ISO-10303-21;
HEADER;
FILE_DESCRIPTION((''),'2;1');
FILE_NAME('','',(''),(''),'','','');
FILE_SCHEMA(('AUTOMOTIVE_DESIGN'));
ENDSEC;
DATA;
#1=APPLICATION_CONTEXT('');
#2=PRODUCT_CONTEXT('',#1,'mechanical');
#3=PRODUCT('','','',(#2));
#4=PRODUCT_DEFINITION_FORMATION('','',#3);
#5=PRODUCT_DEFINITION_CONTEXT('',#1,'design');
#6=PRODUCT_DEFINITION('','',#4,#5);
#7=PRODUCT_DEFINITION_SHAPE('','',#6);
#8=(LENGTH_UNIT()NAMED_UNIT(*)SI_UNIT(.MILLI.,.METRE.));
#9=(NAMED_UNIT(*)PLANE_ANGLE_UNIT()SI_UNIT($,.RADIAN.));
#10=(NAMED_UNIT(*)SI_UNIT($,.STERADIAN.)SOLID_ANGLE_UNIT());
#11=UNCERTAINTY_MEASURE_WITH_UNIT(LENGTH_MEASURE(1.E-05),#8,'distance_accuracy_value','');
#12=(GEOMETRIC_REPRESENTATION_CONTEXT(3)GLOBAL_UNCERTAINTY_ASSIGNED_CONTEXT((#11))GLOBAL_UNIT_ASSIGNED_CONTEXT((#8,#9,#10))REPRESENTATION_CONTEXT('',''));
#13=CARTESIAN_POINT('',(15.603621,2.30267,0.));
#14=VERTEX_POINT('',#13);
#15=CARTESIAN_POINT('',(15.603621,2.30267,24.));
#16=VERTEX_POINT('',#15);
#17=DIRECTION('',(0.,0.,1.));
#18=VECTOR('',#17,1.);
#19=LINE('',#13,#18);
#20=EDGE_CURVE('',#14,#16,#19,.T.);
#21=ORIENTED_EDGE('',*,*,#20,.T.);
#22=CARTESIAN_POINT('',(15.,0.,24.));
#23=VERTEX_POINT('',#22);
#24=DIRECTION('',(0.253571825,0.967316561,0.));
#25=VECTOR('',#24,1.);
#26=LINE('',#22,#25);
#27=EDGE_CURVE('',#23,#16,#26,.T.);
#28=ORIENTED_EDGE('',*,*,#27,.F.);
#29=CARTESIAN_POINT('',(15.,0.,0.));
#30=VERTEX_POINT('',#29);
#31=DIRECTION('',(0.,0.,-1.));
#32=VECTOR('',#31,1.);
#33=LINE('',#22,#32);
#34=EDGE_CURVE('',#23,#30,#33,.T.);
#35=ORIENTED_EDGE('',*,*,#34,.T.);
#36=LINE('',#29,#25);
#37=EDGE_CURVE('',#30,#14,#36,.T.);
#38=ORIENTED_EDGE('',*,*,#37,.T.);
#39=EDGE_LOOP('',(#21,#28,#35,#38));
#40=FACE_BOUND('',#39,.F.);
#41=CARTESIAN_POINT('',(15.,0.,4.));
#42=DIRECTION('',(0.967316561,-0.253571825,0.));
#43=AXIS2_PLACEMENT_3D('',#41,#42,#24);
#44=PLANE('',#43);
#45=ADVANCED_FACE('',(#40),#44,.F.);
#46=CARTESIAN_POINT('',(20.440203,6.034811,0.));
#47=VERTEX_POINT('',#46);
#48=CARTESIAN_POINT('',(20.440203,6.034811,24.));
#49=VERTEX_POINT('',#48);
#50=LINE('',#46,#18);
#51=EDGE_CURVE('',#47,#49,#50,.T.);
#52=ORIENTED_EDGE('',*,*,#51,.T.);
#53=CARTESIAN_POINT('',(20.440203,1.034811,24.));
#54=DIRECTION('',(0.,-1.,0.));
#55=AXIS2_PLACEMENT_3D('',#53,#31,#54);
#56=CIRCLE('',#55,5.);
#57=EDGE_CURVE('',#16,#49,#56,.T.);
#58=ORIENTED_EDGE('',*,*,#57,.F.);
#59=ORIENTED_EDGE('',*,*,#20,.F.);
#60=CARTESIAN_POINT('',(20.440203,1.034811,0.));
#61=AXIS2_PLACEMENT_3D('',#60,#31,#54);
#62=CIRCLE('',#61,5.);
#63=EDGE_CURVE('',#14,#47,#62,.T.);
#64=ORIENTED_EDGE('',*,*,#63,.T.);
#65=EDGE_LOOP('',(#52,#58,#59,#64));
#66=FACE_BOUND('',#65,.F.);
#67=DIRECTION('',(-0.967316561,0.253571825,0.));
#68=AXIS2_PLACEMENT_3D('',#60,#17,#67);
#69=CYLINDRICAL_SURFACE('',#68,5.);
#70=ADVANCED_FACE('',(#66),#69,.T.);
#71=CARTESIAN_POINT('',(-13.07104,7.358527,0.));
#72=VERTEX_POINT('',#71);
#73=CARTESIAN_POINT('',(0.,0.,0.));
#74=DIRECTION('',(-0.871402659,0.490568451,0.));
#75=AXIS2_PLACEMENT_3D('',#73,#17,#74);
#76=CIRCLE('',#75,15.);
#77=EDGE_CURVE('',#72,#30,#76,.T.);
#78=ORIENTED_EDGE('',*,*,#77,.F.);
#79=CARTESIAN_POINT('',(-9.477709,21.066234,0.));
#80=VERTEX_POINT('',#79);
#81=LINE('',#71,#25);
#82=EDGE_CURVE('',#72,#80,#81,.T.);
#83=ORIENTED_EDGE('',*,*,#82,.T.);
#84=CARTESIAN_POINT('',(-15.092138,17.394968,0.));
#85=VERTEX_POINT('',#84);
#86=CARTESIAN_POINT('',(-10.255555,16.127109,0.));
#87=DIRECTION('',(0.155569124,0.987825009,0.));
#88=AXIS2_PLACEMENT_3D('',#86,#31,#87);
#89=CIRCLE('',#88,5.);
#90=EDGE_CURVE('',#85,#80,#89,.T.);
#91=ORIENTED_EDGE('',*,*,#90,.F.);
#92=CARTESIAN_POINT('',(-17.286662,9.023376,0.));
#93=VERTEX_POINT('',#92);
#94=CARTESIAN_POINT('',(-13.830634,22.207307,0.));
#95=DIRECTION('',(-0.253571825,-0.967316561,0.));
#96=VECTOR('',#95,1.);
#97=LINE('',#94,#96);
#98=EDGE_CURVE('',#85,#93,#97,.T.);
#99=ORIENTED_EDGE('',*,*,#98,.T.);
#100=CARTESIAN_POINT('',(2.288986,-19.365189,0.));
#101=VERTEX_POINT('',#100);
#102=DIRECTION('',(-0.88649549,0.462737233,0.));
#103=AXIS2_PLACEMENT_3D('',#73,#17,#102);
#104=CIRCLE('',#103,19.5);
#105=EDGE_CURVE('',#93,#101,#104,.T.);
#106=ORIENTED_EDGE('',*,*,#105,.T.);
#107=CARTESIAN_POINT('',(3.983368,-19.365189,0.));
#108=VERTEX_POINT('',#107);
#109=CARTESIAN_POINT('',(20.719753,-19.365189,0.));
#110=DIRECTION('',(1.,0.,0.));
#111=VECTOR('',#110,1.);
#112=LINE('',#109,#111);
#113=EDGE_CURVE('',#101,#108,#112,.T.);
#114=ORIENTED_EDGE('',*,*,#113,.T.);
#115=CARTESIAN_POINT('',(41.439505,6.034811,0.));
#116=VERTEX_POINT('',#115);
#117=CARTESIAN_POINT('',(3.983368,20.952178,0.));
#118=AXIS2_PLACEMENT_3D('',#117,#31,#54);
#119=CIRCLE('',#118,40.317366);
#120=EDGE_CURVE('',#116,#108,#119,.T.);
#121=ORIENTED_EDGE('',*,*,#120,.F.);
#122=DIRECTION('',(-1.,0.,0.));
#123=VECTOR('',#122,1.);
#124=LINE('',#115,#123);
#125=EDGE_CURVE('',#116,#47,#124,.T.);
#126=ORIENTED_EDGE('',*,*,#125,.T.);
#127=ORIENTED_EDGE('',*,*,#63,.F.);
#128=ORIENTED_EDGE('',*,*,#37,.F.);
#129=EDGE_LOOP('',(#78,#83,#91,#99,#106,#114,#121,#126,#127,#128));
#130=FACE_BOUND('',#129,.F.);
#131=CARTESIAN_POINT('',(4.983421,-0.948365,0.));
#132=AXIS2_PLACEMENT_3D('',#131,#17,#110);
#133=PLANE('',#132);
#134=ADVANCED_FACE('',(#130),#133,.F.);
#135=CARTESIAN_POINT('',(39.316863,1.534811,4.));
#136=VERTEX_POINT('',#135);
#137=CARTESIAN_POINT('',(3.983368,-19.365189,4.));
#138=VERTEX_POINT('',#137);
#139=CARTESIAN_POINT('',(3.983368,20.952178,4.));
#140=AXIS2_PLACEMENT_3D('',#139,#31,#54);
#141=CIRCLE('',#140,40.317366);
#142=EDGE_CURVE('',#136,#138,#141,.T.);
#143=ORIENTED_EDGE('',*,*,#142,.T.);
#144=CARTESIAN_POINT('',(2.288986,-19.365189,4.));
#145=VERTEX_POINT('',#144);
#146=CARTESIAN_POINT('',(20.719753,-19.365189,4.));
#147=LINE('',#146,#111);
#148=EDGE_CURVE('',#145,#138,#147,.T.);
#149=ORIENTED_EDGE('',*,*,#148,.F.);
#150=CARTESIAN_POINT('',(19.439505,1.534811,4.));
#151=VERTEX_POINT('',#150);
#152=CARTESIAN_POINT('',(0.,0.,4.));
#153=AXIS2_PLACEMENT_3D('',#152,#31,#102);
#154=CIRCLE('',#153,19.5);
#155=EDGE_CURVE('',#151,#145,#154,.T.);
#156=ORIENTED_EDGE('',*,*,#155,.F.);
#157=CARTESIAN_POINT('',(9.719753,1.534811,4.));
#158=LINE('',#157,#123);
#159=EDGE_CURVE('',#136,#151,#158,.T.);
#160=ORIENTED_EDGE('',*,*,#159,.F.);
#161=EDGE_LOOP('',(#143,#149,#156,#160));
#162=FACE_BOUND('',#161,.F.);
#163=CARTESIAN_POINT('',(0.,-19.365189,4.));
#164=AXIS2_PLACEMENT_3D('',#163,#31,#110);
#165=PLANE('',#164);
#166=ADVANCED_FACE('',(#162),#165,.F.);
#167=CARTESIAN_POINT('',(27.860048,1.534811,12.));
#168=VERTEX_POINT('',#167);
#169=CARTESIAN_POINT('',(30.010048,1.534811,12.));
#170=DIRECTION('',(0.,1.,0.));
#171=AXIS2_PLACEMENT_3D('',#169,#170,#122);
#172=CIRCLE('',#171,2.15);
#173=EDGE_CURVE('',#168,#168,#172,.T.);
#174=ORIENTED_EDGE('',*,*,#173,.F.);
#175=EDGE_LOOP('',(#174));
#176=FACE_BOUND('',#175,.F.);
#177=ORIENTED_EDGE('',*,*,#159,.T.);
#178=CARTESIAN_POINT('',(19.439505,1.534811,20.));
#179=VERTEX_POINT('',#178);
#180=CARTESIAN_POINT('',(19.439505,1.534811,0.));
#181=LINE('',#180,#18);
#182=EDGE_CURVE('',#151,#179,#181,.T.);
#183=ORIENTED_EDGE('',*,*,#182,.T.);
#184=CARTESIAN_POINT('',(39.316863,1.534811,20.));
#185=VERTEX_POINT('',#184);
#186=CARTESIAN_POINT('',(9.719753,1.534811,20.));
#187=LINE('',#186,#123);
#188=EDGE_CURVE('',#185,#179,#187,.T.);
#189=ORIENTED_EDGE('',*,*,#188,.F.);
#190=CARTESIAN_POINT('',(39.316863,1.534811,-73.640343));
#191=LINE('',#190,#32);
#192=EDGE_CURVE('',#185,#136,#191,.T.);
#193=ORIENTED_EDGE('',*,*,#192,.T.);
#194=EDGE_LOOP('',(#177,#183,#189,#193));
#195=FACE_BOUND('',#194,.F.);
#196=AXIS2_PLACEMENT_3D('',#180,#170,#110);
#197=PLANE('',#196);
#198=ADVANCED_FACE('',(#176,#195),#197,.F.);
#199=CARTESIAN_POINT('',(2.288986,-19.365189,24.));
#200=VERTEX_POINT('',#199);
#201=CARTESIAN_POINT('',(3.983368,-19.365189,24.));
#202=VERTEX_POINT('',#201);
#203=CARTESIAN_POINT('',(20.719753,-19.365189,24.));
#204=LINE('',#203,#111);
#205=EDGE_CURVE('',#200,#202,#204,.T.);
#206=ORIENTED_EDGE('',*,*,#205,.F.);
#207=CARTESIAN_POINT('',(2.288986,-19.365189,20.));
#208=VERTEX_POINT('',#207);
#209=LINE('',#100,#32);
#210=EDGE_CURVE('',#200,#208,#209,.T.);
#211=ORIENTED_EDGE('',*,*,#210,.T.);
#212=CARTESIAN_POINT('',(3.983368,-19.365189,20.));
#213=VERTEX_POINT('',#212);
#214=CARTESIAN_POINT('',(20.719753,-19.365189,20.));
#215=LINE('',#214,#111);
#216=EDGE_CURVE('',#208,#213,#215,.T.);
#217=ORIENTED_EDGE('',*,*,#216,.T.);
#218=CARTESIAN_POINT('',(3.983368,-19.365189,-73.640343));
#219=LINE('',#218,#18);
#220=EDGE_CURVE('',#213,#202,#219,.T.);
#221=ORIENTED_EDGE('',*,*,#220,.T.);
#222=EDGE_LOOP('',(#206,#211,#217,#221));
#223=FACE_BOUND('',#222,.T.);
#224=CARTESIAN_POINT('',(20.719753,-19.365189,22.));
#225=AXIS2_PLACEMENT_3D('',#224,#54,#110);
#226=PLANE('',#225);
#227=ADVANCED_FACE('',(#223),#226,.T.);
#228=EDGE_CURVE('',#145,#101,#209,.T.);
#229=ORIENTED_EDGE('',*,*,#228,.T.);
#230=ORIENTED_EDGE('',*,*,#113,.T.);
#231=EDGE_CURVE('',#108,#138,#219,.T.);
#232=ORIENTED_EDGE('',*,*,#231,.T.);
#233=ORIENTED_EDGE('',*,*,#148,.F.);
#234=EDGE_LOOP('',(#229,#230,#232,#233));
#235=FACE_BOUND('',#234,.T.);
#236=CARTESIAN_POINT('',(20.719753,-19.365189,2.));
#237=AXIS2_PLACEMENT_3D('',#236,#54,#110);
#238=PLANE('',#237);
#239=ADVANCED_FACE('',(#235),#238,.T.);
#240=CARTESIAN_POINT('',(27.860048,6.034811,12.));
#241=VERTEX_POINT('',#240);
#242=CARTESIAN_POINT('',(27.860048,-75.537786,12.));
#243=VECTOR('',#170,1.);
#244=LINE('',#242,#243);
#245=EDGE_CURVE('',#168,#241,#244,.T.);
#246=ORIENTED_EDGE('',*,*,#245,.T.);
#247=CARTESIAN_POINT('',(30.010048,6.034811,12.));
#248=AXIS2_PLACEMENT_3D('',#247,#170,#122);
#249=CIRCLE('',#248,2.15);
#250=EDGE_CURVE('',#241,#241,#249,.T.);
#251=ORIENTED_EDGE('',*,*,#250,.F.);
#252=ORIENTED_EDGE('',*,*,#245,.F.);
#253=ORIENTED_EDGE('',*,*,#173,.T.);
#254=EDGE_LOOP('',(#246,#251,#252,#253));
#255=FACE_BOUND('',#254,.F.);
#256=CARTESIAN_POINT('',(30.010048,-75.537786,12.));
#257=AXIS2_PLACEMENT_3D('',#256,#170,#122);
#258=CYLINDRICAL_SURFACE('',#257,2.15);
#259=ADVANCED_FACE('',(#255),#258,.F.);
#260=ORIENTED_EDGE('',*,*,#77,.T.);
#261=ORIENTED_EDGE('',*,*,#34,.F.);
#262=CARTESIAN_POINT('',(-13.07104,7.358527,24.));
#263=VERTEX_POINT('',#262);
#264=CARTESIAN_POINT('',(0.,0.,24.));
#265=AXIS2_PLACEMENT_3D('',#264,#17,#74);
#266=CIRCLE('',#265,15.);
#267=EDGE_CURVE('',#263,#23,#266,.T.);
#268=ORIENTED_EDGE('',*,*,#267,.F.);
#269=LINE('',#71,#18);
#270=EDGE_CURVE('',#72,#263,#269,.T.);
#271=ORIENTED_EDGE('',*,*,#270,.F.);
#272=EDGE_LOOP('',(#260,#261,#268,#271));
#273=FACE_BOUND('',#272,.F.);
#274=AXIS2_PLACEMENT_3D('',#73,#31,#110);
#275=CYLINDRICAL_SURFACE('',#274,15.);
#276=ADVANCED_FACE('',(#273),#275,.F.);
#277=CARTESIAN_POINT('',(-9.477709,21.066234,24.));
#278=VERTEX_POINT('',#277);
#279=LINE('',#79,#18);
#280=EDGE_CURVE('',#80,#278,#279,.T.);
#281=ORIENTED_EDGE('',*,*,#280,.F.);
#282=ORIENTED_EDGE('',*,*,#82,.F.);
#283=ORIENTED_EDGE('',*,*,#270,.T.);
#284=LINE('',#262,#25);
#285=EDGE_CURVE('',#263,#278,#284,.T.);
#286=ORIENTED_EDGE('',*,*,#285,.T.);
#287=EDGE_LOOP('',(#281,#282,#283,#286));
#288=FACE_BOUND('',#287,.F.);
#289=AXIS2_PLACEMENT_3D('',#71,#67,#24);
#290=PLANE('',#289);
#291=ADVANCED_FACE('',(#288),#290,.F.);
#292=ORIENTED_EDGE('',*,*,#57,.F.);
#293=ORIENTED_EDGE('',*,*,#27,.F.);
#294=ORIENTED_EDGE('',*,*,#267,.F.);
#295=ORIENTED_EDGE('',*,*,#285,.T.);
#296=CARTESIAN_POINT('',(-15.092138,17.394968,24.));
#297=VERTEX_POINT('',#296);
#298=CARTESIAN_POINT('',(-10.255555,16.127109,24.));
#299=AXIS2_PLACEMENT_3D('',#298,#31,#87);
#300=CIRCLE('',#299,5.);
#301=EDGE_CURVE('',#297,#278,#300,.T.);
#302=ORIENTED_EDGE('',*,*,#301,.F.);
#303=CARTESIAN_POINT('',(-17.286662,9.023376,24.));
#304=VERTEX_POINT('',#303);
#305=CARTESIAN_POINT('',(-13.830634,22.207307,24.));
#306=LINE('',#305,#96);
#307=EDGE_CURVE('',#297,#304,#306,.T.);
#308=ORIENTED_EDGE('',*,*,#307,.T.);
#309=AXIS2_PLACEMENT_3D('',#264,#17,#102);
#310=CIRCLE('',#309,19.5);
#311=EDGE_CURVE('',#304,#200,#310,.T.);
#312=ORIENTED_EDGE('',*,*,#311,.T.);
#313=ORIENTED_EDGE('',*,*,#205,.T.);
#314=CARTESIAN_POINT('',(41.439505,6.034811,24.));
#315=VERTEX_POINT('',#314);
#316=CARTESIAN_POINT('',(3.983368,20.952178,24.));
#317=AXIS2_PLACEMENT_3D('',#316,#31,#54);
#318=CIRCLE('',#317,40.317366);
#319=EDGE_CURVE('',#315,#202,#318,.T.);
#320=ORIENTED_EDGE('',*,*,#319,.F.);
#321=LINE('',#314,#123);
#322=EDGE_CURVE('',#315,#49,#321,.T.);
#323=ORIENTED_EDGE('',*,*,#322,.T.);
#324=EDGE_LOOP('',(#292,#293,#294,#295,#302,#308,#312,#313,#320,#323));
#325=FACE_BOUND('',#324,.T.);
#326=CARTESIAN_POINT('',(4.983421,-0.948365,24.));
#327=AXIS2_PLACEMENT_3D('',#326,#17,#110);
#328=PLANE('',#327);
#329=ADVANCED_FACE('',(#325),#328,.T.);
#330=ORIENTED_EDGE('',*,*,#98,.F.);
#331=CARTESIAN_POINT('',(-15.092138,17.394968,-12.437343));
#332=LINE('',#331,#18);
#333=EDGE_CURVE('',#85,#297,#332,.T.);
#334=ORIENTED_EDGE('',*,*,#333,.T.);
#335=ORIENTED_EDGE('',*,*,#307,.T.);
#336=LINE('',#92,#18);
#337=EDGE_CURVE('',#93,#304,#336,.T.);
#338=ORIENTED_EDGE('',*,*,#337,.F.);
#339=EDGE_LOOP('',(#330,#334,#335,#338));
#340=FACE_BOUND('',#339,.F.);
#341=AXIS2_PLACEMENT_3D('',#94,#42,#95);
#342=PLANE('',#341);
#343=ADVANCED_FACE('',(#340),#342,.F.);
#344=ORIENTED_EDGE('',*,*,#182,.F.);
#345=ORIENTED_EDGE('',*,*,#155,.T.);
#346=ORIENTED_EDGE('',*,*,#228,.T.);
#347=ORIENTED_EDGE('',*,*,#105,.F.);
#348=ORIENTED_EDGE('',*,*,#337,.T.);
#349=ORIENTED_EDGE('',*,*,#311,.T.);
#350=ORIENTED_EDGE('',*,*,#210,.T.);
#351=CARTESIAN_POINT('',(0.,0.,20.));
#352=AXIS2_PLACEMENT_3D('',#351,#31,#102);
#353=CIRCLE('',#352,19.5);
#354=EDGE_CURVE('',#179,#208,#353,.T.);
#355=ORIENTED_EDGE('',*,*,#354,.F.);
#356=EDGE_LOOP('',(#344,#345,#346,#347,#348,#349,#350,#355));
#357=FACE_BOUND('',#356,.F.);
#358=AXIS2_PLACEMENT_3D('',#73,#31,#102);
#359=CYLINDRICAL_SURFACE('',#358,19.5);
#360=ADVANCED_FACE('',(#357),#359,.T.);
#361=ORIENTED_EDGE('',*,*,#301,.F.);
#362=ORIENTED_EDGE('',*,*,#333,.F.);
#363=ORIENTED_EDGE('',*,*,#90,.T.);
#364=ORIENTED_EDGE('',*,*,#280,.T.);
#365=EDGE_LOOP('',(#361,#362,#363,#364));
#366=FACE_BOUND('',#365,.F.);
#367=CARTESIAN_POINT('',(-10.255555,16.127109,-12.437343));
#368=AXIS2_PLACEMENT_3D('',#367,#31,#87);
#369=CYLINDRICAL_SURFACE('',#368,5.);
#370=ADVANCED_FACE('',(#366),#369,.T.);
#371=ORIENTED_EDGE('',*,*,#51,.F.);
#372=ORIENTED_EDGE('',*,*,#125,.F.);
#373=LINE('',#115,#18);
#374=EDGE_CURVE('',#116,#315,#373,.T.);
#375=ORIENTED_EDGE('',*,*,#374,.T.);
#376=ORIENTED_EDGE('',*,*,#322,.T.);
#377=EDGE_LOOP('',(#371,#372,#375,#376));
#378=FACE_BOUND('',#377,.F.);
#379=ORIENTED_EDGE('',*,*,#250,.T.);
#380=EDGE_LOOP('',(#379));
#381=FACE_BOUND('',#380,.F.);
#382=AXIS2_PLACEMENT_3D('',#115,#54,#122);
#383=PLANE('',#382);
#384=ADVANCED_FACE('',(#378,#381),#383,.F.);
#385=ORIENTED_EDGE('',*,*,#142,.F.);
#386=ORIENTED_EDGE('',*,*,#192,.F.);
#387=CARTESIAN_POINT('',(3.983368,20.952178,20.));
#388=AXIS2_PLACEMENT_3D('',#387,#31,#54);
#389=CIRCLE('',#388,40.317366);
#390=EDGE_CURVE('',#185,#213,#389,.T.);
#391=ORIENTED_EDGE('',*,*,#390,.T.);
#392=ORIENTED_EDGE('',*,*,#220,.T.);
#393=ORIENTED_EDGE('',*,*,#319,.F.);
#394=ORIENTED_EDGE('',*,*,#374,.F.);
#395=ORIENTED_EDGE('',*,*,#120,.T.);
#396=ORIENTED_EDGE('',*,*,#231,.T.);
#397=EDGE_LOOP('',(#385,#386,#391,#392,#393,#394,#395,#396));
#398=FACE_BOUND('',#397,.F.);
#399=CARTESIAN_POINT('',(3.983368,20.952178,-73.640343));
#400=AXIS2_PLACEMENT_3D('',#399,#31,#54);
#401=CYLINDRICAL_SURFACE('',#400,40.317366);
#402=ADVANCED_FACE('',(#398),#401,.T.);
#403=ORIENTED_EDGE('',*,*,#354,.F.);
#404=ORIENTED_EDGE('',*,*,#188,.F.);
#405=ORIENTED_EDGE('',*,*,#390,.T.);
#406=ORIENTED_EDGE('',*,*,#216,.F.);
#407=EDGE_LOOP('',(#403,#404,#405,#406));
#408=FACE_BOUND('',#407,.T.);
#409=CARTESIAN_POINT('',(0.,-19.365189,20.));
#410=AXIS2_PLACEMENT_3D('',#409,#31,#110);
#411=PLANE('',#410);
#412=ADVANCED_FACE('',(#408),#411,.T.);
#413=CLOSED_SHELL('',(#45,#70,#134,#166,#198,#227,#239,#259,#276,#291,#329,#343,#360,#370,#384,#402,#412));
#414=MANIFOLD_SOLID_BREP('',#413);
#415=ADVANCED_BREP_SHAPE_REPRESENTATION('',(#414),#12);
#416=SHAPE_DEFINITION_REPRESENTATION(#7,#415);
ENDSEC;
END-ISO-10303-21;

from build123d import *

# Parameters (mm, degrees)
F1_DEPTH    = 24
F3_W        = 41.439505011
F3_H        = 4
F4_DEPTH    = 25
F5_DEPTH    = 25
F6_DEPTH    = 25
F7_T1_DEPTH = 191.2806862556
F7_T3_DEPTH = 191.2806862556
F8_R        = 5
F9_T1_DEPTH = 48.8746859277
F11_D       = 4.3


# Not quite as in the source:
# - a fillet or chamfer that OpenCascade refuses, or shapes differently, is made with other operations: its cross-section is extruded or revolved along the edge and cut away or added


with BuildPart() as f1:
    # F0 (on Top) → F1 (new body)
    with BuildSketch(Plane.XY):
        with BuildLine():
            ThreePointArc((15, 0), (-3.8035773729, -14.5097484185), (-13.0710398891, 7.3585267695))
            Line((-13.0710398891, 7.3585267695), (-9.4777092406, 21.0662336417))
            Line((-9.4777092406, 21.0662336417), (-13.8306337662, 22.2073068536))
            Line((-13.8306337662, 22.2073068536), (-17.2866620502, 9.0233760402))
            ThreePointArc((-17.2866620502, 9.0233760402), (-3.8959382238, -19.1068486506), (19.439505011, 1.5348110402))
            Line((19.439505011, 1.5348110402), (41.439505011, 1.5348110402))
            Line((41.439505011, 1.5348110402), (41.439505011, 6.0348110402))
            Line((41.439505011, 6.0348110402), (16.5819620065, 6.0348110402))
            Line((16.5819620065, 6.0348110402), (15, 0))
        make_face()
    extrude(amount=F1_DEPTH)

    # F3 (on offset) → F4 (join)
    with BuildSketch(Plane.XZ.offset(19.3651889598)):
        with Locations((20.7197525055, 2)):
            Rectangle(F3_W, F3_H)
        with Locations((20.7197525055, 22)):
            Rectangle(F3_W, F3_H)
    extrude(amount=-F4_DEPTH)

    # F5 (cut): a face of the model
    f5_faces = [f1.faces().sort_by_distance(p)[0] for p in [
        (6.8703868354, -3.2827389678, 20),
    ]]
    extrude(f5_faces, amount=-F5_DEPTH, mode=Mode.SUBTRACT)

    # F6 (cut): a face of the model
    f6_faces = [f1.faces().sort_by_distance(p)[0] for p in [
        (6.8703868354, -3.2827389678, 4),
    ]]
    extrude(f6_faces, amount=-F6_DEPTH, mode=Mode.SUBTRACT)

    # F7: fillet of radius 40.3173664916 on 2 edges, made by hand

    # F7_s2 → F7_t1 (cut)
    with BuildSketch(Plane.XY.offset(-73.6403431278)):
        with BuildLine():
            ThreePointArc((3.9833677598, -19.3651889598), (26.6114599119, -12.4163628374), (41.439505011, 6.0348110402))
            Line((41.439505011, 6.0348110402), (42.188627756, 5.7364637104))
            ThreePointArc((42.188627756, 5.7364637104), (42.2458523408, -6.6651889598), (42.2458523408, -19.3651889598))
            Line((42.2458523408, -19.3651889598), (41.439505011, -20.1715362896))
            Line((41.439505011, -20.1715362896), (3.9833677598, -20.1715362896))
            Line((3.9833677598, -20.1715362896), (3.9833677598, -19.3651889598))
        make_face()
    extrude(amount=F7_T1_DEPTH, mode=Mode.SUBTRACT)

    # F7_s4 → F7_t3 (cut)
    with BuildSketch(Plane.XY.offset(-93.6403431278)):
        with BuildLine():
            ThreePointArc((3.9833677598, -19.3651889598), (26.6114599119, -12.4163628374), (41.439505011, 6.0348110402))
            Line((41.439505011, 6.0348110402), (42.188627756, 5.7364637104))
            ThreePointArc((42.188627756, 5.7364637104), (42.2458523408, -6.6651889598), (42.2458523408, -19.3651889598))
            Line((42.2458523408, -19.3651889598), (41.439505011, -20.1715362896))
            Line((41.439505011, -20.1715362896), (3.9833677598, -20.1715362896))
            Line((3.9833677598, -20.1715362896), (3.9833677598, -19.3651889598))
        make_face()
    extrude(amount=F7_T3_DEPTH, mode=Mode.SUBTRACT)

    # F8
    f8_edges = [f1.edges().sort_by_distance(p)[0] for p in [
        (16.581962, 6.034811, 12),
    ]]
    fillet(f8_edges, radius=F8_R)

    # F9: fillet of radius 5 on 1 edges, made by hand

    # F9_s2 → F9_t1 (cut)
    with BuildSketch(Plane.XY.offset(-12.4373429638)):
        with BuildLine():
            ThreePointArc((-9.4777092406, 21.0662336417), (-12.9919549133, 20.3118564706), (-15.0921376669, 17.394967723))
            Line((-15.0921376669, 17.394967723), (-13.8306337662, 22.2073068536))
            Line((-13.8306337662, 22.2073068536), (-9.4777092406, 21.0662336417))
        make_face()
    extrude(amount=F9_T1_DEPTH, mode=Mode.SUBTRACT)

    # F11 (through all)
    with Locations(Plane.XZ.offset(-1.5348110402)):
        with Locations((30.0100483, 12)):
            Hole(F11_D / 2)


solid = f1.part
